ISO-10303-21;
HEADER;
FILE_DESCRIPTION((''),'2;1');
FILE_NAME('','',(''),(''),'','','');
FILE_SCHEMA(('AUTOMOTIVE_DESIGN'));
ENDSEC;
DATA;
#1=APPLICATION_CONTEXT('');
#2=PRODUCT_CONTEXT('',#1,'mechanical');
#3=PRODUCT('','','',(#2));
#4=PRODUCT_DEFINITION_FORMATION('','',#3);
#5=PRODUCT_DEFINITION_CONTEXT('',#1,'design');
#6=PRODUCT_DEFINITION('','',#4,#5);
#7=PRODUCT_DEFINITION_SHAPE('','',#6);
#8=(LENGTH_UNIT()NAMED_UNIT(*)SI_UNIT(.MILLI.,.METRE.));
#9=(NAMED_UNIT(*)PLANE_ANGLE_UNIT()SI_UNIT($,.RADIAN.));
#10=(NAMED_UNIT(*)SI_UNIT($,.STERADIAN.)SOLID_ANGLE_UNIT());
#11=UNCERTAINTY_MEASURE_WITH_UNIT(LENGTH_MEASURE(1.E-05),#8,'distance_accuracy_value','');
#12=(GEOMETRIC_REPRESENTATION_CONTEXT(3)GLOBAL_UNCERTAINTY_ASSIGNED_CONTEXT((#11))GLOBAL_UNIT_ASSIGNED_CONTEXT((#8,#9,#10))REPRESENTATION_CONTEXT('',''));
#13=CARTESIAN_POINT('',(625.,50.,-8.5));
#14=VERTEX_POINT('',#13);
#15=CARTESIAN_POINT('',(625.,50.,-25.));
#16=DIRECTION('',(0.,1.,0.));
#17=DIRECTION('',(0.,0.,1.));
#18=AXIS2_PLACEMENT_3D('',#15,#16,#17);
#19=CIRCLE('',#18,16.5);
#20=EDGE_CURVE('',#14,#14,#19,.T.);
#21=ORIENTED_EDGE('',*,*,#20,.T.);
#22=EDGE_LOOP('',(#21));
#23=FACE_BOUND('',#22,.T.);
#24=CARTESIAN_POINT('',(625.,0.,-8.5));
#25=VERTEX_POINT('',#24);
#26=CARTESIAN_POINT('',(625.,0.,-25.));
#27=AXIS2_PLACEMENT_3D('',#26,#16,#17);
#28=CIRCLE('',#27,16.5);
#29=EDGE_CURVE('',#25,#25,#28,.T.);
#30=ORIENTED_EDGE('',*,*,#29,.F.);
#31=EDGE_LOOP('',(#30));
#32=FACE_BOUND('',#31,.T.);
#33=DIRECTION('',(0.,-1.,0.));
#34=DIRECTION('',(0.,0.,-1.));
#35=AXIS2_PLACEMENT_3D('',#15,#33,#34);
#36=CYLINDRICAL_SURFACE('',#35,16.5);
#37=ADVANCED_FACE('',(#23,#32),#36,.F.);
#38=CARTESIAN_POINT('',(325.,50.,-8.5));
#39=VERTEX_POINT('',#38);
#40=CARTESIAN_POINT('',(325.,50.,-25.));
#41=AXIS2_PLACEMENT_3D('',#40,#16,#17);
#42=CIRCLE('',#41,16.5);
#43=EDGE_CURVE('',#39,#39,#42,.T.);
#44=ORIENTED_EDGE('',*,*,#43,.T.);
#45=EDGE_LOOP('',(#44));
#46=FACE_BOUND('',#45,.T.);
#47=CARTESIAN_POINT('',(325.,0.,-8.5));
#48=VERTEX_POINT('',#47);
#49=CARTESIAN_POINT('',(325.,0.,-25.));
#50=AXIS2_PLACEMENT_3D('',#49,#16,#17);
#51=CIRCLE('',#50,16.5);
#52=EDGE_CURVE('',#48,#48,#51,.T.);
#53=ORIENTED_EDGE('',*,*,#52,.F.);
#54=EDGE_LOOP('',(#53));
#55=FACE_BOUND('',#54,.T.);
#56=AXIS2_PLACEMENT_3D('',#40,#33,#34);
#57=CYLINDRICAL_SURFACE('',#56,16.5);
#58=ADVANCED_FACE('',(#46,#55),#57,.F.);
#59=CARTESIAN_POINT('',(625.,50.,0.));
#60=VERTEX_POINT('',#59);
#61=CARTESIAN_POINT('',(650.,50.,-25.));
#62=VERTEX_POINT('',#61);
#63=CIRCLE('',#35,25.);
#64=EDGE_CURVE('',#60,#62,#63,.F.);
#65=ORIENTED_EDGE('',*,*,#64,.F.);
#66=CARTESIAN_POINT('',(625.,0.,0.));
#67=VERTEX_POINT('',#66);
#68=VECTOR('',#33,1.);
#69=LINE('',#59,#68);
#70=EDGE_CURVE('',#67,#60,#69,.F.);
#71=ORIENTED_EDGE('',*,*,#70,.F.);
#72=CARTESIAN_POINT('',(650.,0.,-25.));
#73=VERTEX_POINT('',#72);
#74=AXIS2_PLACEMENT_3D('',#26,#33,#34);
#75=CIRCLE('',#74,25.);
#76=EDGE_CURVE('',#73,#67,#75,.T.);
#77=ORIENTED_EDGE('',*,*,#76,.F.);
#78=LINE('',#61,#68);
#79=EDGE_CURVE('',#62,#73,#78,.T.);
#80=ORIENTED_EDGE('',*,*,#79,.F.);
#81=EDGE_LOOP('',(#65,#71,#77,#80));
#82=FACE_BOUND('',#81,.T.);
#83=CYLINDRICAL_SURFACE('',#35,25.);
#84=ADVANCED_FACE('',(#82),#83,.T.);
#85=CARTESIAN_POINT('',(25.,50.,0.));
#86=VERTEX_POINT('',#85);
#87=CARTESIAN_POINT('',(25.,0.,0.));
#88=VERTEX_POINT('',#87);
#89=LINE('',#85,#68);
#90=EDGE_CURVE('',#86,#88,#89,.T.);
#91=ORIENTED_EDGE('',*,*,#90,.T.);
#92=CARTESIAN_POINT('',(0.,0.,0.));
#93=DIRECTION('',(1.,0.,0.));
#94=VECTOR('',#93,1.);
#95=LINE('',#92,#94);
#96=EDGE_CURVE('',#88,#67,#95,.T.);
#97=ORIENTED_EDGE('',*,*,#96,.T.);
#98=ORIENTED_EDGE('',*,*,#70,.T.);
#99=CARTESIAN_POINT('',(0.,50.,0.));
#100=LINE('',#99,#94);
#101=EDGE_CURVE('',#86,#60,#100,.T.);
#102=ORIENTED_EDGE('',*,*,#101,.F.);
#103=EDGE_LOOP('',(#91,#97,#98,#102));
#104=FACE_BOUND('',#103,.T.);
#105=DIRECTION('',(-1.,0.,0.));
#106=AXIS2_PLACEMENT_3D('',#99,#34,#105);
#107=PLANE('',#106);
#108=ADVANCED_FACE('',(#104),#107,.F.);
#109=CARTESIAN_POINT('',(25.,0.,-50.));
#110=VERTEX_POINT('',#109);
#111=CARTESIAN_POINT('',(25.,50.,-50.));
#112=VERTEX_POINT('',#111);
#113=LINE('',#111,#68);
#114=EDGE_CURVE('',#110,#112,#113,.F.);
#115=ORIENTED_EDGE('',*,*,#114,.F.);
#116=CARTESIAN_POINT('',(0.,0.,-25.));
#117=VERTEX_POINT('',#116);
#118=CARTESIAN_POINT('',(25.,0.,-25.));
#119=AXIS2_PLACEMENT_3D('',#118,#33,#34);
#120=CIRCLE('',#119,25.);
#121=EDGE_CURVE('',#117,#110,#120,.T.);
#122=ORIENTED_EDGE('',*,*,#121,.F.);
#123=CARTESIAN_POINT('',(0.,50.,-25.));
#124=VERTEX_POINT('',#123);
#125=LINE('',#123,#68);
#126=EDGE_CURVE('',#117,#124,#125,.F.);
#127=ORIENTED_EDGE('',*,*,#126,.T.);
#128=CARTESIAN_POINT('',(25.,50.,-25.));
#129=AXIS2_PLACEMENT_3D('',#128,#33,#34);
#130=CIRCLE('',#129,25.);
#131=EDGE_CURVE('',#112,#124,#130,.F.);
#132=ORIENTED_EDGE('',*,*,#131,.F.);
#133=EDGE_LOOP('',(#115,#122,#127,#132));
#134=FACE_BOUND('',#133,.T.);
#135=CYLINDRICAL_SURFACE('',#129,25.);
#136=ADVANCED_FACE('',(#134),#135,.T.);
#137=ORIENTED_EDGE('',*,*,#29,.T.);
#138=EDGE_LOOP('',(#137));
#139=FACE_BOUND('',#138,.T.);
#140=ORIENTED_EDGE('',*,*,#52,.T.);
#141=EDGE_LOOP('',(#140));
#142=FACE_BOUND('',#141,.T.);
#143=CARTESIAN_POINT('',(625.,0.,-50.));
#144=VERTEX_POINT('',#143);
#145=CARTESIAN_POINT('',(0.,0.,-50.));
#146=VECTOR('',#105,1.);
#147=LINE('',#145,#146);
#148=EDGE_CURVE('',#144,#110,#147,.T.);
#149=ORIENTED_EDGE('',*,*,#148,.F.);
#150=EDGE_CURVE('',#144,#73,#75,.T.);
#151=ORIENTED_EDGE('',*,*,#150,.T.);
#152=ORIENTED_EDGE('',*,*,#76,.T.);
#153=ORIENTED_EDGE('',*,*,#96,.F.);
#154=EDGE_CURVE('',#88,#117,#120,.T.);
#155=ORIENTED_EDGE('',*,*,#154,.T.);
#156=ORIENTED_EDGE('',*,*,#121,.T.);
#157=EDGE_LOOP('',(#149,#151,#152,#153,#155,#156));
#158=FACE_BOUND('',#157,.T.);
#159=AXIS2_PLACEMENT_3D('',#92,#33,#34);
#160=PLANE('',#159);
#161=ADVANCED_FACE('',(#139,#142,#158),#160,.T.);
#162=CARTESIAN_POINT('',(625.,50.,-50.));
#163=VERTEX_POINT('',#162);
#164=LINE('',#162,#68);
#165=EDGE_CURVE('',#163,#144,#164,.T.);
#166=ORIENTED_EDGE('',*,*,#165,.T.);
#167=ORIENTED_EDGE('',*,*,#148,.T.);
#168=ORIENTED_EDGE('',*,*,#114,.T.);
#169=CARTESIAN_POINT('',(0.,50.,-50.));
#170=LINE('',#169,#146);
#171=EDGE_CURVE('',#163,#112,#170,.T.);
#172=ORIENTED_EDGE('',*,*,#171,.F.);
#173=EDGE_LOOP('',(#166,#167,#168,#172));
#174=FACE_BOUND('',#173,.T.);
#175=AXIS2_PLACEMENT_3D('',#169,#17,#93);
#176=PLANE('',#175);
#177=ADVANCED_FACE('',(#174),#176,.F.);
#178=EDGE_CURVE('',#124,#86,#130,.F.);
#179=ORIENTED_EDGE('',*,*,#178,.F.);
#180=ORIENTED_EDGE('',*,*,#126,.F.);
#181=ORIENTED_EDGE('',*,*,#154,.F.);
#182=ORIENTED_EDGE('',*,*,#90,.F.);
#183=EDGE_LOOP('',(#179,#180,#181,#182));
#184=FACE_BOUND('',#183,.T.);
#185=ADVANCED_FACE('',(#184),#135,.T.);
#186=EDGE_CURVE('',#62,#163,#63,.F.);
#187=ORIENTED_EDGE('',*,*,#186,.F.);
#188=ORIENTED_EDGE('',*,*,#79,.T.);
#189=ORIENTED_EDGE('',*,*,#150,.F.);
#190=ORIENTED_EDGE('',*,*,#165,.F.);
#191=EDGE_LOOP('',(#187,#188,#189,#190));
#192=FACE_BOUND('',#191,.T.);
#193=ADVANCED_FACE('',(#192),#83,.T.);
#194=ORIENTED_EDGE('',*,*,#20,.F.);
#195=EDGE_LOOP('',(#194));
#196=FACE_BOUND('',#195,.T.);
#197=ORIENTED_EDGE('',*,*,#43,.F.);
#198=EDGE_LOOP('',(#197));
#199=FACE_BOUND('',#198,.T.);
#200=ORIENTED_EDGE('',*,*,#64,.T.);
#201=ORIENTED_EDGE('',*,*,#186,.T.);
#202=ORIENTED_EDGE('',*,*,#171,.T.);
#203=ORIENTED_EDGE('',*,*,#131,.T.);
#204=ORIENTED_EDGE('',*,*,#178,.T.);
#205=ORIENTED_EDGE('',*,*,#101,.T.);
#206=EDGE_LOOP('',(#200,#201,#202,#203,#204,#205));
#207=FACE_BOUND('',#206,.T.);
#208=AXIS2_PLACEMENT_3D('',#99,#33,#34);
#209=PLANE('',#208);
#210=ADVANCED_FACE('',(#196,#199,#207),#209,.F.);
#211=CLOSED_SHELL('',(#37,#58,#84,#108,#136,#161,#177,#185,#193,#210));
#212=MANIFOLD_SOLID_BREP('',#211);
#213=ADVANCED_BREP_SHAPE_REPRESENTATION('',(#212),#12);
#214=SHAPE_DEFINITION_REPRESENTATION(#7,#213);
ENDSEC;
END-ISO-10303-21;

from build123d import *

# Parameters (mm, degrees)
SKETCH_1_W      = 650
SKETCH_1_H      = 50
SKETCH_1_R      = 16.5
EXTRUDE_1_DEPTH = 50
FILLET_1_R      = 25


with BuildPart() as part:
    # 草图1 → 凸台-拉伸1 (new body)
    with BuildSketch(Plane(origin=(0, 0, 0), x_dir=(1, 0, 0), z_dir=(0, 1, 0))):
        with Locations((325, 25)):
            Rectangle(SKETCH_1_W, SKETCH_1_H)
        with Locations(Location((625, 25, 0), (0, 0, 270))):
            Circle(SKETCH_1_R, mode=Mode.SUBTRACT)
        with Locations(Location((325, 25, 0), (0, 0, 270))):
            Circle(SKETCH_1_R, mode=Mode.SUBTRACT)
    extrude(amount=EXTRUDE_1_DEPTH)

    # 圆角1
    fillet_1_edges = [part.edges().sort_by_distance(p)[0] for p in [
        (0, 25, -50),
        (0, 25, 0),
        (650, 25, -50),
        (650, 25, 0),
    ]]
    fillet(fillet_1_edges, radius=FILLET_1_R - 0.0001)  # a hair under: the kernel refuses the full size


solid = part.part
